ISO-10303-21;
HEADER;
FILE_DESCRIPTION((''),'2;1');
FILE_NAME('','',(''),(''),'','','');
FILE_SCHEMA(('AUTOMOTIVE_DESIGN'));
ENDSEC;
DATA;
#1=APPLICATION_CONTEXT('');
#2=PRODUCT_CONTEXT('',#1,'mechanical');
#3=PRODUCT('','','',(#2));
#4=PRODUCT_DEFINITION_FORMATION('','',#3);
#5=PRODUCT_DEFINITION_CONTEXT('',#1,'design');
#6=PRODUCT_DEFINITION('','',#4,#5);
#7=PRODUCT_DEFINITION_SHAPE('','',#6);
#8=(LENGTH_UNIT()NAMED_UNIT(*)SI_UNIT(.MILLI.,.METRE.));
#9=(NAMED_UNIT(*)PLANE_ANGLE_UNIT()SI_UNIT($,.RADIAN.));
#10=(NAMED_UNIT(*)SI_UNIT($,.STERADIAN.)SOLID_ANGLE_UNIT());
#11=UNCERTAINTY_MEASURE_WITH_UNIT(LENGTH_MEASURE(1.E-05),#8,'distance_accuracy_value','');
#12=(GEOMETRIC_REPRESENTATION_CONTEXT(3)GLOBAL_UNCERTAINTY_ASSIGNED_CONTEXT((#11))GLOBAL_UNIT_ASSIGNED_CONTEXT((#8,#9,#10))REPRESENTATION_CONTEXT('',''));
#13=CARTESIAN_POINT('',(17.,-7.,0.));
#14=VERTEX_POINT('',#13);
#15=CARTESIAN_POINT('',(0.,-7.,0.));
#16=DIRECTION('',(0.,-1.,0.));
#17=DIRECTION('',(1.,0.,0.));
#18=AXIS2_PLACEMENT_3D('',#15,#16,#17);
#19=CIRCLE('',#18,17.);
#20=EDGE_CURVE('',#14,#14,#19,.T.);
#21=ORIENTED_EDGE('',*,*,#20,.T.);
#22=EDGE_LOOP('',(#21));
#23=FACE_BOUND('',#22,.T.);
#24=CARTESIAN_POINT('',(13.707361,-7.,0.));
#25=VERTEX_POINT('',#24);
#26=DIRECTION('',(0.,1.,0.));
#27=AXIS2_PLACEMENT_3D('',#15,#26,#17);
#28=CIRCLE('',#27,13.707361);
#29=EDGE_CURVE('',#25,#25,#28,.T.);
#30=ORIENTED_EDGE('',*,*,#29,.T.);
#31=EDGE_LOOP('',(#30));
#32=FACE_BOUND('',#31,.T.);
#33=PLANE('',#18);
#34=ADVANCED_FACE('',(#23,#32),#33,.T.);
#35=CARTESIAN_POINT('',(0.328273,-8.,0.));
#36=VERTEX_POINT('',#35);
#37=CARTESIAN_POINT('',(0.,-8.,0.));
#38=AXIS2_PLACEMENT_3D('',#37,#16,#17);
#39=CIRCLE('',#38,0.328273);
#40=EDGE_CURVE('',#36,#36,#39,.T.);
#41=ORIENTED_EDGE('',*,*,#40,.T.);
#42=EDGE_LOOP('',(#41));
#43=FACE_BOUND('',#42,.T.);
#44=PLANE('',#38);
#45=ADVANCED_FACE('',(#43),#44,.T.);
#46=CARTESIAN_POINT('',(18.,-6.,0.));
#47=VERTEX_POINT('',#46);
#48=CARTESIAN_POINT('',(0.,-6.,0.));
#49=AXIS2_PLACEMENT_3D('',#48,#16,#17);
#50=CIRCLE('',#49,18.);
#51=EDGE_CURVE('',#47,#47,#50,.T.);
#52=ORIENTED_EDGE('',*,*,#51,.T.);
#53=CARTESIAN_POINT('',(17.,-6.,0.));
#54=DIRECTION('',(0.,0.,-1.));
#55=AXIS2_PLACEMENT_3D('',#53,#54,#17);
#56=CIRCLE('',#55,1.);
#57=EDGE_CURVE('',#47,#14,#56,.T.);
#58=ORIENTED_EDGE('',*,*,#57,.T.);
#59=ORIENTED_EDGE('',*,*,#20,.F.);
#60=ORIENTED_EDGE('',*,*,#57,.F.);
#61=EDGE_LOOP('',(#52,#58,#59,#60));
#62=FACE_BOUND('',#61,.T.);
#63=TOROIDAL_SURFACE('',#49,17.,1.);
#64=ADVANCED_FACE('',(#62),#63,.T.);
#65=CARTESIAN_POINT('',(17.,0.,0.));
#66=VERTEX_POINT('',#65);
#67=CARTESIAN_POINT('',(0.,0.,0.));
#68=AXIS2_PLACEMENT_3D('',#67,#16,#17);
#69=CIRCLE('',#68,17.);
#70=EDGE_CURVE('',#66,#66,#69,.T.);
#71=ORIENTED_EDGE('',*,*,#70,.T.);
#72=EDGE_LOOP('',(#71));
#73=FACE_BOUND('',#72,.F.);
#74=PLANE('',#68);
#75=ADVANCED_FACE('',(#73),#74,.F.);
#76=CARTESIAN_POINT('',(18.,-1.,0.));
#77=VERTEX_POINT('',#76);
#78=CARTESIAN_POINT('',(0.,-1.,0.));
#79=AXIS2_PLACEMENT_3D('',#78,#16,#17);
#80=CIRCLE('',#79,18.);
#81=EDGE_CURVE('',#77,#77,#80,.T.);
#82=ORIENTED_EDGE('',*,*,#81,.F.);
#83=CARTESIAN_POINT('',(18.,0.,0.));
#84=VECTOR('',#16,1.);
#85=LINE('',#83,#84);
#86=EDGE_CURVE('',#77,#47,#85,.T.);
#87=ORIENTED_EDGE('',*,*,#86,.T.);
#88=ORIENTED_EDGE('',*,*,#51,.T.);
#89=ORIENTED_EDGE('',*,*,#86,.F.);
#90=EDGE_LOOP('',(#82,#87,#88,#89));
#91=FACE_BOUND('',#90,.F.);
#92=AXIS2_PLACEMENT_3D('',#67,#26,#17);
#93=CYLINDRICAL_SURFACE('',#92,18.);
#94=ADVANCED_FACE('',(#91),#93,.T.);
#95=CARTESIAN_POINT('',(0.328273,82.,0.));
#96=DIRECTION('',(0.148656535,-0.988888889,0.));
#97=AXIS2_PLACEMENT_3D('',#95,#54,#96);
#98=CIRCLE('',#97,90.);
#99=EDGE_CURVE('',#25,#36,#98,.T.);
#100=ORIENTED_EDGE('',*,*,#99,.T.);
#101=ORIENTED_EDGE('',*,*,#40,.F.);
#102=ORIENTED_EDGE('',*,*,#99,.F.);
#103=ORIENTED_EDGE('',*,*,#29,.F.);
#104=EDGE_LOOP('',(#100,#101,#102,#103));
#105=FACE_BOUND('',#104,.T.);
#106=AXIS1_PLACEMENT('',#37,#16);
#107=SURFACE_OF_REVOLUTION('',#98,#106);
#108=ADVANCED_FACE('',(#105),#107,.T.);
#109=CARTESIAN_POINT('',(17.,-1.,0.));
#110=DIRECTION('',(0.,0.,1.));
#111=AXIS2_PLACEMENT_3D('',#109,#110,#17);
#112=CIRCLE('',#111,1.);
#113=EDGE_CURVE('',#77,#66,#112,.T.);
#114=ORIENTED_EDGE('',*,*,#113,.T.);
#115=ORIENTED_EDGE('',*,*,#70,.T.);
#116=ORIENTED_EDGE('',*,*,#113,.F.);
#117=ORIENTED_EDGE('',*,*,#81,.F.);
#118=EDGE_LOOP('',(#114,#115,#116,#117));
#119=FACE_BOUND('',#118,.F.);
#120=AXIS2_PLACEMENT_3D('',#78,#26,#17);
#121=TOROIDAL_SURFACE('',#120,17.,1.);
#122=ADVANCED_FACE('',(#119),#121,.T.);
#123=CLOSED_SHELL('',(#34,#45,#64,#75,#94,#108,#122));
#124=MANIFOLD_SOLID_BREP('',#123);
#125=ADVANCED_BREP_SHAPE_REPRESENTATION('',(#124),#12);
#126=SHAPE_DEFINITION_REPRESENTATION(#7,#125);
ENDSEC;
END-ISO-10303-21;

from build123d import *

# Parameters (mm, degrees)
F0_R     = 18
F0_R_2   = 13.6738896343
F1_DEPTH = 7
F2_R     = 1
F3_R     = 13.7073607276
F4_DEPTH = 8


# Not quite as in the source:
# - a fillet or chamfer that OpenCascade refuses, or shapes differently, is made with other operations: its cross-section is extruded or revolved along the edge and cut away or added


with BuildPart() as f1:
    # F0 (on Front) → F1 (new body)
    with BuildSketch(Plane.XZ):
        Circle(F0_R)
        Circle(F0_R_2, mode=Mode.SUBTRACT)
    extrude(amount=F1_DEPTH)

    # F2
    f2_edges = [f1.edges().sort_by_distance(p)[0] for p in [
        (-18, -7, 0),
        (-18, 0, 0),
    ]]
    fillet(f2_edges, radius=F2_R)

    # F3 (on Front) → F4 (join)
    with BuildSketch(Plane.XZ):
        Circle(F3_R)
    extrude(amount=F4_DEPTH)

    # F5: fillet of radius 90 on 1 edges, made by hand

    # F5_s1 → F5_t2 (revolve, cut)
    with BuildSketch(Plane.XY):
        with BuildLine():
            ThreePointArc((13.7073607276, -7), (7.0364764999, -7.7496518099), (0.3282725674, -8))
            Line((0.3282725674, -8), (13.7073607276, -8))
            Line((13.7073607276, -8), (13.7073607276, -7))
        make_face()
    revolve(axis=Axis((0, -8, 0), (0, -1, 0)), mode=Mode.SUBTRACT)


solid = f1.part
